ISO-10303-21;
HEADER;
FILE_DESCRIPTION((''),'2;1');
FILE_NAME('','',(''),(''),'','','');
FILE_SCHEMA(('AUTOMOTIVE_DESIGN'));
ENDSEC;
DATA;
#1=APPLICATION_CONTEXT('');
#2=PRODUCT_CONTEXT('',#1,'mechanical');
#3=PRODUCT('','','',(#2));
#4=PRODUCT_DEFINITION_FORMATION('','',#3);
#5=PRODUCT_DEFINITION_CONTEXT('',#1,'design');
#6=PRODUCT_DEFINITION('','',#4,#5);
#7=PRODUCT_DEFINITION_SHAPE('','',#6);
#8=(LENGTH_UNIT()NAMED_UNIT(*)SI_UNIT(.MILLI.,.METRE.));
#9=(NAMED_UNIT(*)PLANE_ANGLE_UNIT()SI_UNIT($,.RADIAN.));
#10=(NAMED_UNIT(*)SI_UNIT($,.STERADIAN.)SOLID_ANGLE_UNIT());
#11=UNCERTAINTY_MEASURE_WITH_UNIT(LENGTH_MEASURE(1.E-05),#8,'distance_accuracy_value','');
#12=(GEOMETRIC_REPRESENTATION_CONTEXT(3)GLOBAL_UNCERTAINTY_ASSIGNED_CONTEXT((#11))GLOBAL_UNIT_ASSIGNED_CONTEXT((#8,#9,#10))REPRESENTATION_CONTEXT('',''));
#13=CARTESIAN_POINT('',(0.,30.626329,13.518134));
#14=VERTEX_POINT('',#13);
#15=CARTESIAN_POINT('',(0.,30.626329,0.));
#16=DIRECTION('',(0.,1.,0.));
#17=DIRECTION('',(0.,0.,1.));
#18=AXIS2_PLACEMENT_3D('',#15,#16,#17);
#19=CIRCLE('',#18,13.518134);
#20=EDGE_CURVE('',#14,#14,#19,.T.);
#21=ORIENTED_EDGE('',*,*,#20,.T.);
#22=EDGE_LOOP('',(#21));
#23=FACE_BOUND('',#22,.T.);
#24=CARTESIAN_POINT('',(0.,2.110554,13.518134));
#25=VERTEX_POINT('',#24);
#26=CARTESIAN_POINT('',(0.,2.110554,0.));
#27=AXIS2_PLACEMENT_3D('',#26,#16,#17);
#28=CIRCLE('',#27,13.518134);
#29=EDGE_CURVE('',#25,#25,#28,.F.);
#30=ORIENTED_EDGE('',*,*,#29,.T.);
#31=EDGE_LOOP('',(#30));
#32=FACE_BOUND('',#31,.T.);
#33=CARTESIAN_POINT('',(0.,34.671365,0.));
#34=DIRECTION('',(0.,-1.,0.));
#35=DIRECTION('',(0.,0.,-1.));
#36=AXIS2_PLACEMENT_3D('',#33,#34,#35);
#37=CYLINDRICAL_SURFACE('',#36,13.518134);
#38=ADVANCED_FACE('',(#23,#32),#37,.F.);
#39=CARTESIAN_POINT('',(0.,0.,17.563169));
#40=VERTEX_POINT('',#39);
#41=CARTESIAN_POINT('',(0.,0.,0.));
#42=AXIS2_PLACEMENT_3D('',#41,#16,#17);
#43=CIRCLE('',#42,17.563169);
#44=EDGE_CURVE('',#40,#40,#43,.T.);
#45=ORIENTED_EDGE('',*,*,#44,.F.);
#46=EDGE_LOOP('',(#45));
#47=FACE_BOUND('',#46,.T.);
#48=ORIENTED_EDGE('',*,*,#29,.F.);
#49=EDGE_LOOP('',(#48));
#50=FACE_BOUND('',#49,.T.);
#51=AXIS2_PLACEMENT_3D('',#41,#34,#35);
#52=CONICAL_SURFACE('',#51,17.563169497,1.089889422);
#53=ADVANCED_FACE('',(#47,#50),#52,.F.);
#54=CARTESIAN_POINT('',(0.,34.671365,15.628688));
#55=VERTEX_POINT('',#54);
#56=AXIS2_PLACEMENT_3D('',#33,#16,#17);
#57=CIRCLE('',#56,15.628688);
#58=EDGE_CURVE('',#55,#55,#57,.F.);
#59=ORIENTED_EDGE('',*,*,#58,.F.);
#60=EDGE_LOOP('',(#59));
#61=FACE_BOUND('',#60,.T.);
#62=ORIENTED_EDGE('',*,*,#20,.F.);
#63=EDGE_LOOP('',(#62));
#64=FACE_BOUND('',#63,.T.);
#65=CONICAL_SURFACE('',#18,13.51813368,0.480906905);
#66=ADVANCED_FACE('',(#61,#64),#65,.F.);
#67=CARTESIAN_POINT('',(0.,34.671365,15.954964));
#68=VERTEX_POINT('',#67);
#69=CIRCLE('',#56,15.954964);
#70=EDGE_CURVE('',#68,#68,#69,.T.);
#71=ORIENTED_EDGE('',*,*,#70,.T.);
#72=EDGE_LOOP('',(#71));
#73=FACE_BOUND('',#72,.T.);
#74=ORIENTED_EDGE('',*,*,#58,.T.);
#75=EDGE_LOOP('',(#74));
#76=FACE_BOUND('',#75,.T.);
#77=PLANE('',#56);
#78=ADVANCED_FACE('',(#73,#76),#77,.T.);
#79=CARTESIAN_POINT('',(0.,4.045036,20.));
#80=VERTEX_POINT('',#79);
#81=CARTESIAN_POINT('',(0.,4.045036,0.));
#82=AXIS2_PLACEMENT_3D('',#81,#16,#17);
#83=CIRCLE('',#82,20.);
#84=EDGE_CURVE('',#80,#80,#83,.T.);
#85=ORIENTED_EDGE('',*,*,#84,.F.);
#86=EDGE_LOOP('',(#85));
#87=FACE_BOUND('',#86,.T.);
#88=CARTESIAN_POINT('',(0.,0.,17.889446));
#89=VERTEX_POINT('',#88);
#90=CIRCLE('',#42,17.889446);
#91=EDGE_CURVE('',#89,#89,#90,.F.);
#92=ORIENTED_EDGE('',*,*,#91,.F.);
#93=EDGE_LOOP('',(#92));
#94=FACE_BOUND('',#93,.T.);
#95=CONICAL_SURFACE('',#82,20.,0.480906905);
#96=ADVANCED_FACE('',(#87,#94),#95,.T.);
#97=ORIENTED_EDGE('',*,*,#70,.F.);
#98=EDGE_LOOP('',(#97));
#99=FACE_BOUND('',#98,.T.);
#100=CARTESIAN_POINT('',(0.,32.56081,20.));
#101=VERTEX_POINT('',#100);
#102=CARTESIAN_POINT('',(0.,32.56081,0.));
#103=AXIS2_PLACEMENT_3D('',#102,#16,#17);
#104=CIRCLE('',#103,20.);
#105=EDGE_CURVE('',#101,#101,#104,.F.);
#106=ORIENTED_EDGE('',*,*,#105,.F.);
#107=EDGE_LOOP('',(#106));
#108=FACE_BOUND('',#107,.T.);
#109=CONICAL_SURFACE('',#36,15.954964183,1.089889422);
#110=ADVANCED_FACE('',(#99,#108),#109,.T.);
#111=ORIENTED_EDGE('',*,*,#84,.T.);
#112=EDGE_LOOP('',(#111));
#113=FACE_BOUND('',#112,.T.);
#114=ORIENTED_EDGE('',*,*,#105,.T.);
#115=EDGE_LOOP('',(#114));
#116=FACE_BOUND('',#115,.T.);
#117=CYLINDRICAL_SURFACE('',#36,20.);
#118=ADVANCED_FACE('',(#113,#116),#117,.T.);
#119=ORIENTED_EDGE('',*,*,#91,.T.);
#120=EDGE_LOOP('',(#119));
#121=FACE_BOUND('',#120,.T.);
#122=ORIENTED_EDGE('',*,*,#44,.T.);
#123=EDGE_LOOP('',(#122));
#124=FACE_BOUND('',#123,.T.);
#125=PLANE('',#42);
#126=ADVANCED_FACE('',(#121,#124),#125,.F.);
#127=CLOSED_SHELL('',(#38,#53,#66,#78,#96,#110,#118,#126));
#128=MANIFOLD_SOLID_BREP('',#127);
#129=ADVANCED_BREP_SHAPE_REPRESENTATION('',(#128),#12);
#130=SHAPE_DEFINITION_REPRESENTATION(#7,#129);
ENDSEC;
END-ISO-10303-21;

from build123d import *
from OCP.BRepFilletAPI import BRepFilletAPI_MakeChamfer

# Parameters (mm, degrees)
SKETCH1_R           = 20
BOSS_EXTRUDE1_DEPTH = 34.671364881
SKETCH2_R           = 13.51813368
CUT_EXTRUDE1_DEPTH  = 45.744871692
CHAMFER1_SIZE       = 2.11055446
CHAMFER1_SIZE2      = 4.045035817


with BuildPart() as part:
    # Sketch1 → Boss-Extrude1 (new body)
    with BuildSketch(Plane(origin=(0, 0, 0), x_dir=(1, 0, 0), z_dir=(0, 1, 0))):
        Circle(SKETCH1_R)
    extrude(amount=BOSS_EXTRUDE1_DEPTH)

    # Sketch2 → Cut-Extrude1 (cut, through all)
    with BuildSketch(Plane(origin=(0, 0, 0), x_dir=(1, 0, 0), z_dir=(0, 1, 0))):
        Circle(SKETCH2_R)
    extrude(amount=CUT_EXTRUDE1_DEPTH, mode=Mode.SUBTRACT)

    # Chamfer1: one chamfer whose edges measure the first distance from different faces: ONE call of the kernel's chamfer builder (chamfer() names one face for all edges)
    chamfer1_edges_1 = [part.edges().sort_by_distance(p)[0] for p in [
        (-13.51813368, 34.671364881, 0),
    ]]
    chamfer1_side_1 = [part.faces().sort_by_distance(p)[0] for p in [
        (-19.434314575, 34.671364881, 0),
    ]]
    chamfer1_edges_2 = [part.edges().sort_by_distance(p)[0] for p in [
        (-13.51813368, 0, 0),
    ]]
    chamfer1_side_2 = [part.faces().sort_by_distance(p)[0] for p in [
        (-13.51813368, 17.335682441, 0),
    ]]
    chamfer1_edges_3 = [part.edges().sort_by_distance(p)[0] for p in [
        (-20, 0, 0),
    ]]
    chamfer1_side_3 = [part.faces().sort_by_distance(p)[0] for p in [
        (-19.434314575, 0, 0),
    ]]
    chamfer1_edges_4 = [part.edges().sort_by_distance(p)[0] for p in [
        (-20, 34.671364881, 0),
    ]]
    chamfer1_side_4 = [part.faces().sort_by_distance(p)[0] for p in [
        (-20, 17.335682441, 0),
    ]]
    chamfer1 = BRepFilletAPI_MakeChamfer(part.part.solid().wrapped)
    for e in chamfer1_edges_1:
        chamfer1.Add(CHAMFER1_SIZE, CHAMFER1_SIZE2, e.wrapped, chamfer1_side_1[0].wrapped)  # the first distance lies on this face
    for e in chamfer1_edges_2:
        chamfer1.Add(CHAMFER1_SIZE, CHAMFER1_SIZE2, e.wrapped, chamfer1_side_2[0].wrapped)  # the first distance lies on this face
    for e in chamfer1_edges_3:
        chamfer1.Add(CHAMFER1_SIZE, CHAMFER1_SIZE2, e.wrapped, chamfer1_side_3[0].wrapped)  # the first distance lies on this face
    for e in chamfer1_edges_4:
        chamfer1.Add(CHAMFER1_SIZE, CHAMFER1_SIZE2, e.wrapped, chamfer1_side_4[0].wrapped)  # the first distance lies on this face
    add(Compound.cast(chamfer1.Shape()), mode=Mode.REPLACE)


solid = part.part
